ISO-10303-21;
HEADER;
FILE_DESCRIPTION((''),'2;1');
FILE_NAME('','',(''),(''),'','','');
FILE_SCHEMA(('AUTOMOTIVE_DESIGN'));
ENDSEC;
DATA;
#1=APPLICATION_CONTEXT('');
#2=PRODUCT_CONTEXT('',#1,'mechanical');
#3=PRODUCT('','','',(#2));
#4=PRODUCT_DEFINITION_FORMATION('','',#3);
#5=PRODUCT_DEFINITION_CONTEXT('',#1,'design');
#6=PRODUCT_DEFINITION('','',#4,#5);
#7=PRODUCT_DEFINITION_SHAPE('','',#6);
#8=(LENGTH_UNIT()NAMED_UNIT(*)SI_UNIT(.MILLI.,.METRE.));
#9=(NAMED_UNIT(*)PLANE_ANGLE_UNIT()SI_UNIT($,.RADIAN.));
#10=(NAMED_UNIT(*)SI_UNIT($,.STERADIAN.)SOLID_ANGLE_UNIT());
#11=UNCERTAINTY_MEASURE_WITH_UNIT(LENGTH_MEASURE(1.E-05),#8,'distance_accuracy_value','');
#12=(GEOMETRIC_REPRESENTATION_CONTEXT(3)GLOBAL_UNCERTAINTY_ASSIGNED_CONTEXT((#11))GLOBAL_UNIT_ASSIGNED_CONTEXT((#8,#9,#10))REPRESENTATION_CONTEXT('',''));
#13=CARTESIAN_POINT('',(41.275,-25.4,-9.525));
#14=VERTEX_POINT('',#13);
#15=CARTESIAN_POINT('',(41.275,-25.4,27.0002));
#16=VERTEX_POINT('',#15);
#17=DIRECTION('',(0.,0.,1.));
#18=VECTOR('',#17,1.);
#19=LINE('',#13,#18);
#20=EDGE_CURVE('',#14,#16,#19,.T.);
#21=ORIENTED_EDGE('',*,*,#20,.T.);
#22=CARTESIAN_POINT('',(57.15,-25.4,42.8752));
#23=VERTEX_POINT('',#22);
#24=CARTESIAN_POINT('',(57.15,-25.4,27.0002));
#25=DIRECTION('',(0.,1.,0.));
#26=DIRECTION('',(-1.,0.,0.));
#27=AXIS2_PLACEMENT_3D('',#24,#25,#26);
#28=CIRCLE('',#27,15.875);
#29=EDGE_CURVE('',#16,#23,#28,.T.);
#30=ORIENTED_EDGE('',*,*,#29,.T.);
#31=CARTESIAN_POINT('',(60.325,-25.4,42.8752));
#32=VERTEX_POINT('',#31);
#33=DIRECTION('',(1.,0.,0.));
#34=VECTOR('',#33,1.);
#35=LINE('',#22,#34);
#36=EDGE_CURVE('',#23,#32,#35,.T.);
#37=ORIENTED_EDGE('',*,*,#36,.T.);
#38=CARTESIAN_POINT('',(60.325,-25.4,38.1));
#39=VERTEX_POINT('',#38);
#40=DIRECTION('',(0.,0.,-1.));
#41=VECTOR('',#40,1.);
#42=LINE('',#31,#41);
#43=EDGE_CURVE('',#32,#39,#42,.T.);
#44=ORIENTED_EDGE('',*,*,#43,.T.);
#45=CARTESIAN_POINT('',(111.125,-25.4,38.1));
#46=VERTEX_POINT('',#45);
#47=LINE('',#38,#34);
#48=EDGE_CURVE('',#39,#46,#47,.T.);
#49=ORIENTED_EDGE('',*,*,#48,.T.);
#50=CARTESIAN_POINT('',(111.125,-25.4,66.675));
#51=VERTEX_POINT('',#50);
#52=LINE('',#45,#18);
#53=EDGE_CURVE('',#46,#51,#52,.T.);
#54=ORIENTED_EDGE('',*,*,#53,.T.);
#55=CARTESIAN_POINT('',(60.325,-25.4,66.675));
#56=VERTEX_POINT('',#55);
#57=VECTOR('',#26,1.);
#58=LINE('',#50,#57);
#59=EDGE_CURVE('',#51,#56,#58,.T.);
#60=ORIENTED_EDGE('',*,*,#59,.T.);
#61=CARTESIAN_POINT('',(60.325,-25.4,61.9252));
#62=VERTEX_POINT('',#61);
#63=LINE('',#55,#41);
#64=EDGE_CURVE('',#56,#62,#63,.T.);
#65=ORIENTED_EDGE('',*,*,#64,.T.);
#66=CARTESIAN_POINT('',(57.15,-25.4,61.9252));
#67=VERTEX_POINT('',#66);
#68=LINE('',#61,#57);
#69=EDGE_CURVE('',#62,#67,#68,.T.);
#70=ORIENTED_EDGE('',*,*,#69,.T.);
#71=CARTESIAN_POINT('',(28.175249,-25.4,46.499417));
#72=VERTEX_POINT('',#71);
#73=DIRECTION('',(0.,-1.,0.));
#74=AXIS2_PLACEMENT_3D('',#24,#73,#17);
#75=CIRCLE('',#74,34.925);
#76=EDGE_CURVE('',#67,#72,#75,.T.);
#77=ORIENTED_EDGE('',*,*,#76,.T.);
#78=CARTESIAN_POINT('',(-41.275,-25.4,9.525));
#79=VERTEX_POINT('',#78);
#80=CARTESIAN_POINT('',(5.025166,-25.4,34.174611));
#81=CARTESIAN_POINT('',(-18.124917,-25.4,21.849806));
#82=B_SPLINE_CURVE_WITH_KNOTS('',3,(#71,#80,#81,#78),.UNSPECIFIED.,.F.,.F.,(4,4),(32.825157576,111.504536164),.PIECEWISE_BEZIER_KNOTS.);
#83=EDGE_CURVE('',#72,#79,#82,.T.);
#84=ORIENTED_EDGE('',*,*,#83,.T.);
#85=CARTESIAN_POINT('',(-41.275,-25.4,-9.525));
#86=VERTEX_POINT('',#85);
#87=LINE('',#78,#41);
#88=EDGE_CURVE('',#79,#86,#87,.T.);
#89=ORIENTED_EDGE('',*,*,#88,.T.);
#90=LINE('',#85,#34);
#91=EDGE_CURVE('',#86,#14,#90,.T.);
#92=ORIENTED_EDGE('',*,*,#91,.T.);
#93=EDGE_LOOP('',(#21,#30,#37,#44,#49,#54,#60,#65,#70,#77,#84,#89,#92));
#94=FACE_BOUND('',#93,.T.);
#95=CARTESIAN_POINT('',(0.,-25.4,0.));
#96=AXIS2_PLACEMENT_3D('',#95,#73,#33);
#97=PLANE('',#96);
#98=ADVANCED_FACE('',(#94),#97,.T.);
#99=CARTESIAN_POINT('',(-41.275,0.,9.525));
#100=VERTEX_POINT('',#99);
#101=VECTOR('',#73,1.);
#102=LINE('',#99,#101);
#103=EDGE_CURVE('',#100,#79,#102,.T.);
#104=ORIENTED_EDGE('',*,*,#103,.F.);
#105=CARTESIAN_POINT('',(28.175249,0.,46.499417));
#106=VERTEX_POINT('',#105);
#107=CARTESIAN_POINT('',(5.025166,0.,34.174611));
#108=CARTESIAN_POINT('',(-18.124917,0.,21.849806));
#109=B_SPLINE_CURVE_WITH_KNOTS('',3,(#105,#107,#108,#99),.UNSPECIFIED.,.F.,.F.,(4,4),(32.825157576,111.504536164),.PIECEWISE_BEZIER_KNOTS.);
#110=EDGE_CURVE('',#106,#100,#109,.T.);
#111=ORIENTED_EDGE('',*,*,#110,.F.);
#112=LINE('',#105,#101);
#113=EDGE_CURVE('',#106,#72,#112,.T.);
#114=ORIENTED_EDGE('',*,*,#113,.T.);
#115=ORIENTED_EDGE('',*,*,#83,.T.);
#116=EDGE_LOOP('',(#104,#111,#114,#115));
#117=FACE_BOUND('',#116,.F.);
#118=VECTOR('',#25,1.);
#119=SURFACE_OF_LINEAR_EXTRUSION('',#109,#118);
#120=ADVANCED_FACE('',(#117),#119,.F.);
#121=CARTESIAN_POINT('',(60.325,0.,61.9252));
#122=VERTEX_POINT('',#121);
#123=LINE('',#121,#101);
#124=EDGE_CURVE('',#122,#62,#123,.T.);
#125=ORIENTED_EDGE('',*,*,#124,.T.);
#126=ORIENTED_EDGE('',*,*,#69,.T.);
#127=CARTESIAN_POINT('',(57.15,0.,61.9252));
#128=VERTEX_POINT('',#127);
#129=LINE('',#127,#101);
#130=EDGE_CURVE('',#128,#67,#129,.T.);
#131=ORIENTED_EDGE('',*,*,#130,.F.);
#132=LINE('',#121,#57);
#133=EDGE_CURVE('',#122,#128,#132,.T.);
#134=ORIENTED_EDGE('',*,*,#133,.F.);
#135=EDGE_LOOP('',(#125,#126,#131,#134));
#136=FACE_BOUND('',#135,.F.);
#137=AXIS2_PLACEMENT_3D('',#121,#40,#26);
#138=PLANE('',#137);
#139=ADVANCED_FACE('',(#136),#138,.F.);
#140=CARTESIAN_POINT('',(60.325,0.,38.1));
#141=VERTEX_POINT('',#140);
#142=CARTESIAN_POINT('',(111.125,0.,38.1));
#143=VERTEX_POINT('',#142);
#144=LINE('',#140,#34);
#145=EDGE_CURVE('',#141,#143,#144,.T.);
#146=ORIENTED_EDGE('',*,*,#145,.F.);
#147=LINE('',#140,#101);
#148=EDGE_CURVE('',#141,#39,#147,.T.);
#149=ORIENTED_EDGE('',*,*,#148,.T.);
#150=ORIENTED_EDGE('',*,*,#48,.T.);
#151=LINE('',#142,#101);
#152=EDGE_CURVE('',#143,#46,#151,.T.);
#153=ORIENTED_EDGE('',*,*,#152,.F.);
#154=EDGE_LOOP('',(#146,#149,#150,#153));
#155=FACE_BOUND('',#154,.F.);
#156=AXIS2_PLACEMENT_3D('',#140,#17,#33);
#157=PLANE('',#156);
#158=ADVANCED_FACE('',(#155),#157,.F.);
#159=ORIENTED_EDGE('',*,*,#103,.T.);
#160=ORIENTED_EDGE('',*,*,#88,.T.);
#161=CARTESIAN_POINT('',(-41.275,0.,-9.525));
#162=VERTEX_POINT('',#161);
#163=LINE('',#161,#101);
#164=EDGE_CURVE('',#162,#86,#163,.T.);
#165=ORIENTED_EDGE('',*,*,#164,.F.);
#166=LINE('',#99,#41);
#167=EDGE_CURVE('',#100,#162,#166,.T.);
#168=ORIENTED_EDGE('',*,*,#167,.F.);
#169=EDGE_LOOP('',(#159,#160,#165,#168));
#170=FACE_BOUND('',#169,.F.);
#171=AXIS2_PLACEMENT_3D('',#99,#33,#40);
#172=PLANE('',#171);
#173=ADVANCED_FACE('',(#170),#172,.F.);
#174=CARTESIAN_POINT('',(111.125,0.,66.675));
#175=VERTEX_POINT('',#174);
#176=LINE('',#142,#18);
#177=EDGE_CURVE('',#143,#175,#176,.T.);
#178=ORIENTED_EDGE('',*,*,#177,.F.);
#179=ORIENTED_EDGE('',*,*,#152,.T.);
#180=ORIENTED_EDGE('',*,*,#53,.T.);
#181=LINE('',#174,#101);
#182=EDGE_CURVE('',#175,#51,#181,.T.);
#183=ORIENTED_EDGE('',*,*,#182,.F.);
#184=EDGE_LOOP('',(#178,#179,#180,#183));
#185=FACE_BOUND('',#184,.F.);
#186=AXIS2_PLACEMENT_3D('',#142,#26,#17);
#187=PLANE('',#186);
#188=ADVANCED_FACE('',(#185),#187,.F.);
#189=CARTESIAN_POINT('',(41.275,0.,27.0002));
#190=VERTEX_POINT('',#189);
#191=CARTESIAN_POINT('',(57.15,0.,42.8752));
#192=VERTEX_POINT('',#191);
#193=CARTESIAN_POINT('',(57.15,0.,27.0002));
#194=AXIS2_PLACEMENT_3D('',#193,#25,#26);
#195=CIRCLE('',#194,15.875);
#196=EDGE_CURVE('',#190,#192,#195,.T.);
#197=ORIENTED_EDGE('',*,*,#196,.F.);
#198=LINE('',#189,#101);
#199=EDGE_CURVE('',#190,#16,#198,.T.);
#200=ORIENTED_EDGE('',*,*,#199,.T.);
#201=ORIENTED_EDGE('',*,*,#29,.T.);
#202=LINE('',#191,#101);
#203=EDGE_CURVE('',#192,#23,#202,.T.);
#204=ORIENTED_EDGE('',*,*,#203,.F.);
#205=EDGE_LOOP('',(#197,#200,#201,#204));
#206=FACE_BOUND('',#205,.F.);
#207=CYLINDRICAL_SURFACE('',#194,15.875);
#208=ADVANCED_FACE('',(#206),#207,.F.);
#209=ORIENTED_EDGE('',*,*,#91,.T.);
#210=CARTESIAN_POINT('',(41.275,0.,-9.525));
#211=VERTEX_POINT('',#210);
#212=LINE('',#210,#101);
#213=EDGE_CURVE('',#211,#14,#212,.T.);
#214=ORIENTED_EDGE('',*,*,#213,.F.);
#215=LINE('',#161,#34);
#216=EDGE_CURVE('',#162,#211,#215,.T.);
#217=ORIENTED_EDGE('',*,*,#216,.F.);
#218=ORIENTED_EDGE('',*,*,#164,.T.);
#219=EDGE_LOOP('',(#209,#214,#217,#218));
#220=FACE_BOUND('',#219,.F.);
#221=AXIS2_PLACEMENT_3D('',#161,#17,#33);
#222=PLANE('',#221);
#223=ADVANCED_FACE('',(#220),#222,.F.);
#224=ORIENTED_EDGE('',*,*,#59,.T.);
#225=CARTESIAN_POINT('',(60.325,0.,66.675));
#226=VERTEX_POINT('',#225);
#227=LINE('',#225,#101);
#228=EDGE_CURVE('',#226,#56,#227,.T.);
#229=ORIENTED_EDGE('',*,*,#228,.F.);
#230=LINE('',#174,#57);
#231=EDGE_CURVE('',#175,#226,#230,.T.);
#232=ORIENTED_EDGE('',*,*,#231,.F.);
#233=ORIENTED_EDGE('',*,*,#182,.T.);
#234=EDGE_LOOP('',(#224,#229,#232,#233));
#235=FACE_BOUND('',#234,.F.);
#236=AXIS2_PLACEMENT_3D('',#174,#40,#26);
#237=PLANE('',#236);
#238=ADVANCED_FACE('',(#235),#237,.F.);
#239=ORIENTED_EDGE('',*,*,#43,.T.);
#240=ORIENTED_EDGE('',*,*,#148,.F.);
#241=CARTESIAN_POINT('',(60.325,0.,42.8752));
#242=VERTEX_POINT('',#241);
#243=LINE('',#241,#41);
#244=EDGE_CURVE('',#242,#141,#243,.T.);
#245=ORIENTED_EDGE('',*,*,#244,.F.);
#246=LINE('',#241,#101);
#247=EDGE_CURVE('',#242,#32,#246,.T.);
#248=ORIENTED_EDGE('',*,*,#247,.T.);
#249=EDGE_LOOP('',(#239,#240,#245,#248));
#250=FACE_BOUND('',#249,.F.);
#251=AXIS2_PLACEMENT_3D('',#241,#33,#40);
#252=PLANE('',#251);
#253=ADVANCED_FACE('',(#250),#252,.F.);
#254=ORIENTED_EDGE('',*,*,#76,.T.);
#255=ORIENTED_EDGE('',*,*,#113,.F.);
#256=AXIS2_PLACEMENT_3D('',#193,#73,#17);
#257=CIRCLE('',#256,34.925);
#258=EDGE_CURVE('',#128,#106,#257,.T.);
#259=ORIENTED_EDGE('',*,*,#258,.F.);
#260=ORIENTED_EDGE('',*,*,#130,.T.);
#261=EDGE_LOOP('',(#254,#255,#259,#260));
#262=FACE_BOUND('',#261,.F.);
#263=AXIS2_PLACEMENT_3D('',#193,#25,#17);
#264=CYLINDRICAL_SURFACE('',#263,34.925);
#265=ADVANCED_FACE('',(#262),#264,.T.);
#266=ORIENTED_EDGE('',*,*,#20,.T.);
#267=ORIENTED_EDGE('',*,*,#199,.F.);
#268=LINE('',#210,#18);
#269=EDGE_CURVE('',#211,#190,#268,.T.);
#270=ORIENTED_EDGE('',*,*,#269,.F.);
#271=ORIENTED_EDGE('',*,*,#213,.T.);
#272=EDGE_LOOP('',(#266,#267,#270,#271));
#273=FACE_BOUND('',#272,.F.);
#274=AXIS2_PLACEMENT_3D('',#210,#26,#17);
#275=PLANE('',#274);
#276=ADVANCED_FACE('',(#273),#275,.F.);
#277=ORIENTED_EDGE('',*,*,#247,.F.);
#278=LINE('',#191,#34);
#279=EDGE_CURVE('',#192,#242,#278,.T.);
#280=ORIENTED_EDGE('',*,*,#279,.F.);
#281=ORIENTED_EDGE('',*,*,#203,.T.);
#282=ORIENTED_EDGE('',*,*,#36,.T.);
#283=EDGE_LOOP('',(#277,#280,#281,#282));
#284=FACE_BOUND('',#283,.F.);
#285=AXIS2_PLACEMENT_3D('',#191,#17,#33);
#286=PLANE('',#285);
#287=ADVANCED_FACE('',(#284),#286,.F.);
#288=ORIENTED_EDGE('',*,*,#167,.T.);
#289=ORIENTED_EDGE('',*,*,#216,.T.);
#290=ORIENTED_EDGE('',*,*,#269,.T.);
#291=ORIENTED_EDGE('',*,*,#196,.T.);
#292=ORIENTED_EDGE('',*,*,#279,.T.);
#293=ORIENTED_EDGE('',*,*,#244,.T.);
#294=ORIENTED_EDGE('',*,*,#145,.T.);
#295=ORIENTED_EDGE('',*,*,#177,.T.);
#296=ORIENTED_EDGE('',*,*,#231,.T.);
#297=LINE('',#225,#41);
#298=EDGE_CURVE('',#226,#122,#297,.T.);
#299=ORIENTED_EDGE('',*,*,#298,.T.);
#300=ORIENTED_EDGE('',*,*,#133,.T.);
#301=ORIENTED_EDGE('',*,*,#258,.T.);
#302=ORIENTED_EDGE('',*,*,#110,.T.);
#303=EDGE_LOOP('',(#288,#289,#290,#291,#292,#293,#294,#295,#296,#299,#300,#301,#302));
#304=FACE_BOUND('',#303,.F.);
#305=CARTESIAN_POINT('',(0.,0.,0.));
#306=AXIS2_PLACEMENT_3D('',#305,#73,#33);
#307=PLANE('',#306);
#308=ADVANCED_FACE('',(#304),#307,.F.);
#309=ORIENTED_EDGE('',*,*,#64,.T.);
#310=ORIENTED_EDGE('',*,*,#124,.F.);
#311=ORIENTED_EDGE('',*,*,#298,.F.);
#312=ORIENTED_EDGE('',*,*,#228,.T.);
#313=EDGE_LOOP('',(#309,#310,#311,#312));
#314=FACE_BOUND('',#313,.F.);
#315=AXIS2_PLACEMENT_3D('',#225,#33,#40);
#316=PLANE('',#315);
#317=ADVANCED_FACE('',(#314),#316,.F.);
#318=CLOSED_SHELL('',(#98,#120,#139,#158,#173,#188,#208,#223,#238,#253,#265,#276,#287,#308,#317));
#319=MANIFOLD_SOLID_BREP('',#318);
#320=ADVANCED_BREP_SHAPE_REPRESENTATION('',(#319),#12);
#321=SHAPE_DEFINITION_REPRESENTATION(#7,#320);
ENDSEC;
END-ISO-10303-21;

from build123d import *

# Parameters (mm, degrees)
F1_DEPTH = 25.4


# Not quite as in the source:
# - a feature names something its author has since deleted; it is built from what else it names


with BuildPart() as f1:
    # F0 (on Front) → F1 (new body)
    with BuildSketch(Plane.XZ):
        Polygon((-41.275, -9.525), (41.275, -9.525), (41.275, 9.525), (22.225, 9.525), (-41.275, 9.525), align=None)
        with BuildLine():
            Line((22.225, 9.525), (41.275, 9.525))
            Line((41.275, 9.525), (41.275, 27.0002))
            ThreePointArc((41.275, 27.0002), (45.9246798487, 38.2255201513), (57.15, 42.8752))
            Line((57.15, 42.8752), (60.325, 42.8752))
            Line((60.325, 42.8752), (60.325, 61.9252))
            Line((60.325, 61.9252), (57.15, 61.9252))
            add(Edge.make_bspline(
                [(57.15, 61.9252), (47.4917497752, 56.7832722029), (37.8334995503, 51.6413444058), (28.1752493255, 46.4994166087)],
                knots=[0, 0, 0, 0, 32.8251575759, 32.8251575759, 32.8251575759, 32.8251575759], degree=3))
            ThreePointArc((28.1752493255, 46.4994166087), (23.7456680032, 37.1936404813), (22.225, 27.0002))
            Line((22.225, 27.0002), (22.225, 9.525))
        make_face()
        with BuildLine():
            add(Edge.make_bspline(
                [(28.1752493255, 46.4994166087), (5.025166217, 34.1746110724), (-18.1249168915, 21.8498055362), (-41.275, 9.525)],
                knots=[32.8251575759, 32.8251575759, 32.8251575759, 32.8251575759, 111.5045361635, 111.5045361635, 111.5045361635, 111.5045361635], degree=3))
            Line((-41.275, 9.525), (22.225, 9.525))
            Line((22.225, 9.525), (22.225, 27.0002))
            ThreePointArc((22.225, 27.0002), (23.7456680032, 37.1936404813), (28.1752493255, 46.4994166087))
        make_face()
        with BuildLine():
            ThreePointArc((57.15, 61.9252), (40.737421212, 57.8284805639), (28.1752493255, 46.4994166087))
            add(Edge.make_bspline(
                [(57.15, 61.9252), (47.4917497752, 56.7832722029), (37.8334995503, 51.6413444058), (28.1752493255, 46.4994166087)],
                knots=[0, 0, 0, 0, 32.8251575759, 32.8251575759, 32.8251575759, 32.8251575759], degree=3))
        make_face()
        Polygon((60.325, 61.9252), (60.325, 42.8752), (60.325, 38.1), (111.125, 38.1), (111.125, 66.675), (60.325, 66.675), align=None)
    extrude(amount=F1_DEPTH)


solid = f1.part
